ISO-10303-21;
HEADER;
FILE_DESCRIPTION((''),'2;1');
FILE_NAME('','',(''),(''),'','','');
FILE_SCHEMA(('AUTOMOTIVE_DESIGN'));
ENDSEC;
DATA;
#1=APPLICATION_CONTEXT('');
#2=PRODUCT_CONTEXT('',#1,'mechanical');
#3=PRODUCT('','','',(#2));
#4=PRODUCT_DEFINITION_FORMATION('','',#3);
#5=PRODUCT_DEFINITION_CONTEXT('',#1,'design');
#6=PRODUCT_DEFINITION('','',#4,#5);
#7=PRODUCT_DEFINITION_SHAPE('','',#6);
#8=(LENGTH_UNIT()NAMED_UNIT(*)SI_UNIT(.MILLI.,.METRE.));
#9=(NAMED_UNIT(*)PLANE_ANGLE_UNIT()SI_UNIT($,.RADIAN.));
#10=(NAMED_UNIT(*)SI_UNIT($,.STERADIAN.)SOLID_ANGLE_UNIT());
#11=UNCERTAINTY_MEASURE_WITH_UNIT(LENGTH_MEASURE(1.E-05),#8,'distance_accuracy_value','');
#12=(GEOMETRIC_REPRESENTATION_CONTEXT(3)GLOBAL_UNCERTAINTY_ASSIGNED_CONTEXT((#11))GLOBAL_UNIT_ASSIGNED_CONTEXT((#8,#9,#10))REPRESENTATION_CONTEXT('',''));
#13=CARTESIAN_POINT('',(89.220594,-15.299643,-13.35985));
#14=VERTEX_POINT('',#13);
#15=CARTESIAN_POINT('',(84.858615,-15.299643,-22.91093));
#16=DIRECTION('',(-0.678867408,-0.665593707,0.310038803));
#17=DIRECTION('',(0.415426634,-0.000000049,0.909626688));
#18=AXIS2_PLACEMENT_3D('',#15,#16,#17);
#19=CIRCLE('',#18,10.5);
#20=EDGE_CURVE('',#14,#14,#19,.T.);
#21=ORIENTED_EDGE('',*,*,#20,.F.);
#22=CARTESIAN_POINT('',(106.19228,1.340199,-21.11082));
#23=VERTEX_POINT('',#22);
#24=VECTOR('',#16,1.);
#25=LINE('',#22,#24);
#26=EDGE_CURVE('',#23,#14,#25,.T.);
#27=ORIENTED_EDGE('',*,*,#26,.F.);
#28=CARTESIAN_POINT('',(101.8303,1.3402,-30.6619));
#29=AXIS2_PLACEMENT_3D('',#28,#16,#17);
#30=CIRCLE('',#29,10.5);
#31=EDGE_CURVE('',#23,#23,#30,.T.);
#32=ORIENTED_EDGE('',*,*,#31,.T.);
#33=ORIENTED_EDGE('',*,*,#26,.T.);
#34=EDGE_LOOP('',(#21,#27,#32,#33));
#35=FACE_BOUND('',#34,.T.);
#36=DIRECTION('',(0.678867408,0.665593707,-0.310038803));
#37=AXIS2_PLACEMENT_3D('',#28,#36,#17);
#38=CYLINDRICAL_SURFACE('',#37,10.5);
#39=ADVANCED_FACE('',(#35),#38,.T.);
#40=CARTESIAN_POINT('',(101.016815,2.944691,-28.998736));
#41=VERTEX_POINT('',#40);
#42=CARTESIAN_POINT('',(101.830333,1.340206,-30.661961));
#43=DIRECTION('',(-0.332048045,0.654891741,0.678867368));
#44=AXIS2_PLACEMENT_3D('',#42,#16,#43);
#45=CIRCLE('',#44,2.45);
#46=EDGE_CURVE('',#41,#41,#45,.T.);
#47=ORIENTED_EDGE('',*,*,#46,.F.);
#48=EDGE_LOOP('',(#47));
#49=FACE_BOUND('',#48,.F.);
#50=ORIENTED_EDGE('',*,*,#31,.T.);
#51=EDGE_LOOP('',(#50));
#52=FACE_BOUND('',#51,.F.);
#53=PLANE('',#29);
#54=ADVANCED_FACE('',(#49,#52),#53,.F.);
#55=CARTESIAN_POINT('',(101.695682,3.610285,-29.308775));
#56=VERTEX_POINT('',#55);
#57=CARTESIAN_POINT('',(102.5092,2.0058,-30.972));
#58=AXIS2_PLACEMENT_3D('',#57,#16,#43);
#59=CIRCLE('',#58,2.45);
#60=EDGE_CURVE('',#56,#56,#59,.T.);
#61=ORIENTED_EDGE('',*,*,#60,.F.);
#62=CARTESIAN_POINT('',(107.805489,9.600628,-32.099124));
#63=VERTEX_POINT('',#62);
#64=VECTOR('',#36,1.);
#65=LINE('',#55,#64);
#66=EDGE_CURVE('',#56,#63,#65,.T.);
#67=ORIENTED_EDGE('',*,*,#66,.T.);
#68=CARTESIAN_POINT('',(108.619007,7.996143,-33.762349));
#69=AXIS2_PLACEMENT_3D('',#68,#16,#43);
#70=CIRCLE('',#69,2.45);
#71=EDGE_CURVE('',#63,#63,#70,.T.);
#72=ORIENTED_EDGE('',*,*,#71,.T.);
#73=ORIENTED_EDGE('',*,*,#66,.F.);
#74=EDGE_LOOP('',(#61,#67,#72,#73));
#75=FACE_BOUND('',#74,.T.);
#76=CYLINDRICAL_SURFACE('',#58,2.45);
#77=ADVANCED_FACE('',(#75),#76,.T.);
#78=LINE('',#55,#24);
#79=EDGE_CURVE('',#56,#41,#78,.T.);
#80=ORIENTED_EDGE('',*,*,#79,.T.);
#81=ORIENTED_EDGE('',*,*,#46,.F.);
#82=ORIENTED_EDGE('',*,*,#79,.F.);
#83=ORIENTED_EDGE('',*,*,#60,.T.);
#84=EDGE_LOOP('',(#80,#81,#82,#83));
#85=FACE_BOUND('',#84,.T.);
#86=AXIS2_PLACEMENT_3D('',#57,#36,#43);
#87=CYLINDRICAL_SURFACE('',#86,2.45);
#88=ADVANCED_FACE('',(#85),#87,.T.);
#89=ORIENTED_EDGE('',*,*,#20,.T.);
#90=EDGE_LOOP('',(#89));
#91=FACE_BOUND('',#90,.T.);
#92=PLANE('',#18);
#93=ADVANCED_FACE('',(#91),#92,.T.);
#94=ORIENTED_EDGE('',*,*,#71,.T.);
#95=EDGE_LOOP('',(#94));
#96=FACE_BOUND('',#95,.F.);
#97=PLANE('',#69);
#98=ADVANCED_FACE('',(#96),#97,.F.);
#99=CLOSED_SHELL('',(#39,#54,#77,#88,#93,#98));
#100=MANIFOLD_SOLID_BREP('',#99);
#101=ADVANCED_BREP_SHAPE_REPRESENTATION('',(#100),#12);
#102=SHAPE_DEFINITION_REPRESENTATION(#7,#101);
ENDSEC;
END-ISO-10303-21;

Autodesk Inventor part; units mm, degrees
ref_plane "YZ Plane" through (0, 0, 0) normal (1, 0, 0) x (0, 1, 0)
ref_plane "XZ Plane" through (0, 0, 0) normal (0, 1, 0) x (-1, 0, 0)
ref_plane "XY Plane" through (0, 0, 0) normal (0, 0, 1) x (1, 0, 0)
ref_plane "Work Plane1" through (102.5092, 2.0058, -30.972) normal (-0.6788674, -0.6655937, 0.3100388) x (-0.3320481, 0.6548917, 0.6788674)
sketch "Sketch1" plane through (102.5092, 2.0058, -30.972) normal (-0.6788674, -0.6655937, 0.3100388) x (-0.3320481, 0.6548917, 0.6788674)
  circle A0 centre (0, 0) radius 2.45
  point P0 (53.7502, 45.7997)
  dimension "d0" = 4.9
extrude "Extrusion1" add sketch "Sketch1" along normal blind 1 and the other way blind 9
sketch "Sketch2" plane through (101.8303, 1.3402, -30.6619) normal (-0.6788674, -0.6655937, 0.3100388) x (0.4154267, 0, 0.9096267)
  circle A0 centre (0, 0) radius 2.45 projected
  circle A1 centre (0, 0) radius 10.5
  point P0 (-14.4121, 69.1303)
  dimension "d5" = 21
extrude "Extrusion2" add sketch "Sketch2" along normal blind 25 contours A0 | A1
properties part number "motor"
